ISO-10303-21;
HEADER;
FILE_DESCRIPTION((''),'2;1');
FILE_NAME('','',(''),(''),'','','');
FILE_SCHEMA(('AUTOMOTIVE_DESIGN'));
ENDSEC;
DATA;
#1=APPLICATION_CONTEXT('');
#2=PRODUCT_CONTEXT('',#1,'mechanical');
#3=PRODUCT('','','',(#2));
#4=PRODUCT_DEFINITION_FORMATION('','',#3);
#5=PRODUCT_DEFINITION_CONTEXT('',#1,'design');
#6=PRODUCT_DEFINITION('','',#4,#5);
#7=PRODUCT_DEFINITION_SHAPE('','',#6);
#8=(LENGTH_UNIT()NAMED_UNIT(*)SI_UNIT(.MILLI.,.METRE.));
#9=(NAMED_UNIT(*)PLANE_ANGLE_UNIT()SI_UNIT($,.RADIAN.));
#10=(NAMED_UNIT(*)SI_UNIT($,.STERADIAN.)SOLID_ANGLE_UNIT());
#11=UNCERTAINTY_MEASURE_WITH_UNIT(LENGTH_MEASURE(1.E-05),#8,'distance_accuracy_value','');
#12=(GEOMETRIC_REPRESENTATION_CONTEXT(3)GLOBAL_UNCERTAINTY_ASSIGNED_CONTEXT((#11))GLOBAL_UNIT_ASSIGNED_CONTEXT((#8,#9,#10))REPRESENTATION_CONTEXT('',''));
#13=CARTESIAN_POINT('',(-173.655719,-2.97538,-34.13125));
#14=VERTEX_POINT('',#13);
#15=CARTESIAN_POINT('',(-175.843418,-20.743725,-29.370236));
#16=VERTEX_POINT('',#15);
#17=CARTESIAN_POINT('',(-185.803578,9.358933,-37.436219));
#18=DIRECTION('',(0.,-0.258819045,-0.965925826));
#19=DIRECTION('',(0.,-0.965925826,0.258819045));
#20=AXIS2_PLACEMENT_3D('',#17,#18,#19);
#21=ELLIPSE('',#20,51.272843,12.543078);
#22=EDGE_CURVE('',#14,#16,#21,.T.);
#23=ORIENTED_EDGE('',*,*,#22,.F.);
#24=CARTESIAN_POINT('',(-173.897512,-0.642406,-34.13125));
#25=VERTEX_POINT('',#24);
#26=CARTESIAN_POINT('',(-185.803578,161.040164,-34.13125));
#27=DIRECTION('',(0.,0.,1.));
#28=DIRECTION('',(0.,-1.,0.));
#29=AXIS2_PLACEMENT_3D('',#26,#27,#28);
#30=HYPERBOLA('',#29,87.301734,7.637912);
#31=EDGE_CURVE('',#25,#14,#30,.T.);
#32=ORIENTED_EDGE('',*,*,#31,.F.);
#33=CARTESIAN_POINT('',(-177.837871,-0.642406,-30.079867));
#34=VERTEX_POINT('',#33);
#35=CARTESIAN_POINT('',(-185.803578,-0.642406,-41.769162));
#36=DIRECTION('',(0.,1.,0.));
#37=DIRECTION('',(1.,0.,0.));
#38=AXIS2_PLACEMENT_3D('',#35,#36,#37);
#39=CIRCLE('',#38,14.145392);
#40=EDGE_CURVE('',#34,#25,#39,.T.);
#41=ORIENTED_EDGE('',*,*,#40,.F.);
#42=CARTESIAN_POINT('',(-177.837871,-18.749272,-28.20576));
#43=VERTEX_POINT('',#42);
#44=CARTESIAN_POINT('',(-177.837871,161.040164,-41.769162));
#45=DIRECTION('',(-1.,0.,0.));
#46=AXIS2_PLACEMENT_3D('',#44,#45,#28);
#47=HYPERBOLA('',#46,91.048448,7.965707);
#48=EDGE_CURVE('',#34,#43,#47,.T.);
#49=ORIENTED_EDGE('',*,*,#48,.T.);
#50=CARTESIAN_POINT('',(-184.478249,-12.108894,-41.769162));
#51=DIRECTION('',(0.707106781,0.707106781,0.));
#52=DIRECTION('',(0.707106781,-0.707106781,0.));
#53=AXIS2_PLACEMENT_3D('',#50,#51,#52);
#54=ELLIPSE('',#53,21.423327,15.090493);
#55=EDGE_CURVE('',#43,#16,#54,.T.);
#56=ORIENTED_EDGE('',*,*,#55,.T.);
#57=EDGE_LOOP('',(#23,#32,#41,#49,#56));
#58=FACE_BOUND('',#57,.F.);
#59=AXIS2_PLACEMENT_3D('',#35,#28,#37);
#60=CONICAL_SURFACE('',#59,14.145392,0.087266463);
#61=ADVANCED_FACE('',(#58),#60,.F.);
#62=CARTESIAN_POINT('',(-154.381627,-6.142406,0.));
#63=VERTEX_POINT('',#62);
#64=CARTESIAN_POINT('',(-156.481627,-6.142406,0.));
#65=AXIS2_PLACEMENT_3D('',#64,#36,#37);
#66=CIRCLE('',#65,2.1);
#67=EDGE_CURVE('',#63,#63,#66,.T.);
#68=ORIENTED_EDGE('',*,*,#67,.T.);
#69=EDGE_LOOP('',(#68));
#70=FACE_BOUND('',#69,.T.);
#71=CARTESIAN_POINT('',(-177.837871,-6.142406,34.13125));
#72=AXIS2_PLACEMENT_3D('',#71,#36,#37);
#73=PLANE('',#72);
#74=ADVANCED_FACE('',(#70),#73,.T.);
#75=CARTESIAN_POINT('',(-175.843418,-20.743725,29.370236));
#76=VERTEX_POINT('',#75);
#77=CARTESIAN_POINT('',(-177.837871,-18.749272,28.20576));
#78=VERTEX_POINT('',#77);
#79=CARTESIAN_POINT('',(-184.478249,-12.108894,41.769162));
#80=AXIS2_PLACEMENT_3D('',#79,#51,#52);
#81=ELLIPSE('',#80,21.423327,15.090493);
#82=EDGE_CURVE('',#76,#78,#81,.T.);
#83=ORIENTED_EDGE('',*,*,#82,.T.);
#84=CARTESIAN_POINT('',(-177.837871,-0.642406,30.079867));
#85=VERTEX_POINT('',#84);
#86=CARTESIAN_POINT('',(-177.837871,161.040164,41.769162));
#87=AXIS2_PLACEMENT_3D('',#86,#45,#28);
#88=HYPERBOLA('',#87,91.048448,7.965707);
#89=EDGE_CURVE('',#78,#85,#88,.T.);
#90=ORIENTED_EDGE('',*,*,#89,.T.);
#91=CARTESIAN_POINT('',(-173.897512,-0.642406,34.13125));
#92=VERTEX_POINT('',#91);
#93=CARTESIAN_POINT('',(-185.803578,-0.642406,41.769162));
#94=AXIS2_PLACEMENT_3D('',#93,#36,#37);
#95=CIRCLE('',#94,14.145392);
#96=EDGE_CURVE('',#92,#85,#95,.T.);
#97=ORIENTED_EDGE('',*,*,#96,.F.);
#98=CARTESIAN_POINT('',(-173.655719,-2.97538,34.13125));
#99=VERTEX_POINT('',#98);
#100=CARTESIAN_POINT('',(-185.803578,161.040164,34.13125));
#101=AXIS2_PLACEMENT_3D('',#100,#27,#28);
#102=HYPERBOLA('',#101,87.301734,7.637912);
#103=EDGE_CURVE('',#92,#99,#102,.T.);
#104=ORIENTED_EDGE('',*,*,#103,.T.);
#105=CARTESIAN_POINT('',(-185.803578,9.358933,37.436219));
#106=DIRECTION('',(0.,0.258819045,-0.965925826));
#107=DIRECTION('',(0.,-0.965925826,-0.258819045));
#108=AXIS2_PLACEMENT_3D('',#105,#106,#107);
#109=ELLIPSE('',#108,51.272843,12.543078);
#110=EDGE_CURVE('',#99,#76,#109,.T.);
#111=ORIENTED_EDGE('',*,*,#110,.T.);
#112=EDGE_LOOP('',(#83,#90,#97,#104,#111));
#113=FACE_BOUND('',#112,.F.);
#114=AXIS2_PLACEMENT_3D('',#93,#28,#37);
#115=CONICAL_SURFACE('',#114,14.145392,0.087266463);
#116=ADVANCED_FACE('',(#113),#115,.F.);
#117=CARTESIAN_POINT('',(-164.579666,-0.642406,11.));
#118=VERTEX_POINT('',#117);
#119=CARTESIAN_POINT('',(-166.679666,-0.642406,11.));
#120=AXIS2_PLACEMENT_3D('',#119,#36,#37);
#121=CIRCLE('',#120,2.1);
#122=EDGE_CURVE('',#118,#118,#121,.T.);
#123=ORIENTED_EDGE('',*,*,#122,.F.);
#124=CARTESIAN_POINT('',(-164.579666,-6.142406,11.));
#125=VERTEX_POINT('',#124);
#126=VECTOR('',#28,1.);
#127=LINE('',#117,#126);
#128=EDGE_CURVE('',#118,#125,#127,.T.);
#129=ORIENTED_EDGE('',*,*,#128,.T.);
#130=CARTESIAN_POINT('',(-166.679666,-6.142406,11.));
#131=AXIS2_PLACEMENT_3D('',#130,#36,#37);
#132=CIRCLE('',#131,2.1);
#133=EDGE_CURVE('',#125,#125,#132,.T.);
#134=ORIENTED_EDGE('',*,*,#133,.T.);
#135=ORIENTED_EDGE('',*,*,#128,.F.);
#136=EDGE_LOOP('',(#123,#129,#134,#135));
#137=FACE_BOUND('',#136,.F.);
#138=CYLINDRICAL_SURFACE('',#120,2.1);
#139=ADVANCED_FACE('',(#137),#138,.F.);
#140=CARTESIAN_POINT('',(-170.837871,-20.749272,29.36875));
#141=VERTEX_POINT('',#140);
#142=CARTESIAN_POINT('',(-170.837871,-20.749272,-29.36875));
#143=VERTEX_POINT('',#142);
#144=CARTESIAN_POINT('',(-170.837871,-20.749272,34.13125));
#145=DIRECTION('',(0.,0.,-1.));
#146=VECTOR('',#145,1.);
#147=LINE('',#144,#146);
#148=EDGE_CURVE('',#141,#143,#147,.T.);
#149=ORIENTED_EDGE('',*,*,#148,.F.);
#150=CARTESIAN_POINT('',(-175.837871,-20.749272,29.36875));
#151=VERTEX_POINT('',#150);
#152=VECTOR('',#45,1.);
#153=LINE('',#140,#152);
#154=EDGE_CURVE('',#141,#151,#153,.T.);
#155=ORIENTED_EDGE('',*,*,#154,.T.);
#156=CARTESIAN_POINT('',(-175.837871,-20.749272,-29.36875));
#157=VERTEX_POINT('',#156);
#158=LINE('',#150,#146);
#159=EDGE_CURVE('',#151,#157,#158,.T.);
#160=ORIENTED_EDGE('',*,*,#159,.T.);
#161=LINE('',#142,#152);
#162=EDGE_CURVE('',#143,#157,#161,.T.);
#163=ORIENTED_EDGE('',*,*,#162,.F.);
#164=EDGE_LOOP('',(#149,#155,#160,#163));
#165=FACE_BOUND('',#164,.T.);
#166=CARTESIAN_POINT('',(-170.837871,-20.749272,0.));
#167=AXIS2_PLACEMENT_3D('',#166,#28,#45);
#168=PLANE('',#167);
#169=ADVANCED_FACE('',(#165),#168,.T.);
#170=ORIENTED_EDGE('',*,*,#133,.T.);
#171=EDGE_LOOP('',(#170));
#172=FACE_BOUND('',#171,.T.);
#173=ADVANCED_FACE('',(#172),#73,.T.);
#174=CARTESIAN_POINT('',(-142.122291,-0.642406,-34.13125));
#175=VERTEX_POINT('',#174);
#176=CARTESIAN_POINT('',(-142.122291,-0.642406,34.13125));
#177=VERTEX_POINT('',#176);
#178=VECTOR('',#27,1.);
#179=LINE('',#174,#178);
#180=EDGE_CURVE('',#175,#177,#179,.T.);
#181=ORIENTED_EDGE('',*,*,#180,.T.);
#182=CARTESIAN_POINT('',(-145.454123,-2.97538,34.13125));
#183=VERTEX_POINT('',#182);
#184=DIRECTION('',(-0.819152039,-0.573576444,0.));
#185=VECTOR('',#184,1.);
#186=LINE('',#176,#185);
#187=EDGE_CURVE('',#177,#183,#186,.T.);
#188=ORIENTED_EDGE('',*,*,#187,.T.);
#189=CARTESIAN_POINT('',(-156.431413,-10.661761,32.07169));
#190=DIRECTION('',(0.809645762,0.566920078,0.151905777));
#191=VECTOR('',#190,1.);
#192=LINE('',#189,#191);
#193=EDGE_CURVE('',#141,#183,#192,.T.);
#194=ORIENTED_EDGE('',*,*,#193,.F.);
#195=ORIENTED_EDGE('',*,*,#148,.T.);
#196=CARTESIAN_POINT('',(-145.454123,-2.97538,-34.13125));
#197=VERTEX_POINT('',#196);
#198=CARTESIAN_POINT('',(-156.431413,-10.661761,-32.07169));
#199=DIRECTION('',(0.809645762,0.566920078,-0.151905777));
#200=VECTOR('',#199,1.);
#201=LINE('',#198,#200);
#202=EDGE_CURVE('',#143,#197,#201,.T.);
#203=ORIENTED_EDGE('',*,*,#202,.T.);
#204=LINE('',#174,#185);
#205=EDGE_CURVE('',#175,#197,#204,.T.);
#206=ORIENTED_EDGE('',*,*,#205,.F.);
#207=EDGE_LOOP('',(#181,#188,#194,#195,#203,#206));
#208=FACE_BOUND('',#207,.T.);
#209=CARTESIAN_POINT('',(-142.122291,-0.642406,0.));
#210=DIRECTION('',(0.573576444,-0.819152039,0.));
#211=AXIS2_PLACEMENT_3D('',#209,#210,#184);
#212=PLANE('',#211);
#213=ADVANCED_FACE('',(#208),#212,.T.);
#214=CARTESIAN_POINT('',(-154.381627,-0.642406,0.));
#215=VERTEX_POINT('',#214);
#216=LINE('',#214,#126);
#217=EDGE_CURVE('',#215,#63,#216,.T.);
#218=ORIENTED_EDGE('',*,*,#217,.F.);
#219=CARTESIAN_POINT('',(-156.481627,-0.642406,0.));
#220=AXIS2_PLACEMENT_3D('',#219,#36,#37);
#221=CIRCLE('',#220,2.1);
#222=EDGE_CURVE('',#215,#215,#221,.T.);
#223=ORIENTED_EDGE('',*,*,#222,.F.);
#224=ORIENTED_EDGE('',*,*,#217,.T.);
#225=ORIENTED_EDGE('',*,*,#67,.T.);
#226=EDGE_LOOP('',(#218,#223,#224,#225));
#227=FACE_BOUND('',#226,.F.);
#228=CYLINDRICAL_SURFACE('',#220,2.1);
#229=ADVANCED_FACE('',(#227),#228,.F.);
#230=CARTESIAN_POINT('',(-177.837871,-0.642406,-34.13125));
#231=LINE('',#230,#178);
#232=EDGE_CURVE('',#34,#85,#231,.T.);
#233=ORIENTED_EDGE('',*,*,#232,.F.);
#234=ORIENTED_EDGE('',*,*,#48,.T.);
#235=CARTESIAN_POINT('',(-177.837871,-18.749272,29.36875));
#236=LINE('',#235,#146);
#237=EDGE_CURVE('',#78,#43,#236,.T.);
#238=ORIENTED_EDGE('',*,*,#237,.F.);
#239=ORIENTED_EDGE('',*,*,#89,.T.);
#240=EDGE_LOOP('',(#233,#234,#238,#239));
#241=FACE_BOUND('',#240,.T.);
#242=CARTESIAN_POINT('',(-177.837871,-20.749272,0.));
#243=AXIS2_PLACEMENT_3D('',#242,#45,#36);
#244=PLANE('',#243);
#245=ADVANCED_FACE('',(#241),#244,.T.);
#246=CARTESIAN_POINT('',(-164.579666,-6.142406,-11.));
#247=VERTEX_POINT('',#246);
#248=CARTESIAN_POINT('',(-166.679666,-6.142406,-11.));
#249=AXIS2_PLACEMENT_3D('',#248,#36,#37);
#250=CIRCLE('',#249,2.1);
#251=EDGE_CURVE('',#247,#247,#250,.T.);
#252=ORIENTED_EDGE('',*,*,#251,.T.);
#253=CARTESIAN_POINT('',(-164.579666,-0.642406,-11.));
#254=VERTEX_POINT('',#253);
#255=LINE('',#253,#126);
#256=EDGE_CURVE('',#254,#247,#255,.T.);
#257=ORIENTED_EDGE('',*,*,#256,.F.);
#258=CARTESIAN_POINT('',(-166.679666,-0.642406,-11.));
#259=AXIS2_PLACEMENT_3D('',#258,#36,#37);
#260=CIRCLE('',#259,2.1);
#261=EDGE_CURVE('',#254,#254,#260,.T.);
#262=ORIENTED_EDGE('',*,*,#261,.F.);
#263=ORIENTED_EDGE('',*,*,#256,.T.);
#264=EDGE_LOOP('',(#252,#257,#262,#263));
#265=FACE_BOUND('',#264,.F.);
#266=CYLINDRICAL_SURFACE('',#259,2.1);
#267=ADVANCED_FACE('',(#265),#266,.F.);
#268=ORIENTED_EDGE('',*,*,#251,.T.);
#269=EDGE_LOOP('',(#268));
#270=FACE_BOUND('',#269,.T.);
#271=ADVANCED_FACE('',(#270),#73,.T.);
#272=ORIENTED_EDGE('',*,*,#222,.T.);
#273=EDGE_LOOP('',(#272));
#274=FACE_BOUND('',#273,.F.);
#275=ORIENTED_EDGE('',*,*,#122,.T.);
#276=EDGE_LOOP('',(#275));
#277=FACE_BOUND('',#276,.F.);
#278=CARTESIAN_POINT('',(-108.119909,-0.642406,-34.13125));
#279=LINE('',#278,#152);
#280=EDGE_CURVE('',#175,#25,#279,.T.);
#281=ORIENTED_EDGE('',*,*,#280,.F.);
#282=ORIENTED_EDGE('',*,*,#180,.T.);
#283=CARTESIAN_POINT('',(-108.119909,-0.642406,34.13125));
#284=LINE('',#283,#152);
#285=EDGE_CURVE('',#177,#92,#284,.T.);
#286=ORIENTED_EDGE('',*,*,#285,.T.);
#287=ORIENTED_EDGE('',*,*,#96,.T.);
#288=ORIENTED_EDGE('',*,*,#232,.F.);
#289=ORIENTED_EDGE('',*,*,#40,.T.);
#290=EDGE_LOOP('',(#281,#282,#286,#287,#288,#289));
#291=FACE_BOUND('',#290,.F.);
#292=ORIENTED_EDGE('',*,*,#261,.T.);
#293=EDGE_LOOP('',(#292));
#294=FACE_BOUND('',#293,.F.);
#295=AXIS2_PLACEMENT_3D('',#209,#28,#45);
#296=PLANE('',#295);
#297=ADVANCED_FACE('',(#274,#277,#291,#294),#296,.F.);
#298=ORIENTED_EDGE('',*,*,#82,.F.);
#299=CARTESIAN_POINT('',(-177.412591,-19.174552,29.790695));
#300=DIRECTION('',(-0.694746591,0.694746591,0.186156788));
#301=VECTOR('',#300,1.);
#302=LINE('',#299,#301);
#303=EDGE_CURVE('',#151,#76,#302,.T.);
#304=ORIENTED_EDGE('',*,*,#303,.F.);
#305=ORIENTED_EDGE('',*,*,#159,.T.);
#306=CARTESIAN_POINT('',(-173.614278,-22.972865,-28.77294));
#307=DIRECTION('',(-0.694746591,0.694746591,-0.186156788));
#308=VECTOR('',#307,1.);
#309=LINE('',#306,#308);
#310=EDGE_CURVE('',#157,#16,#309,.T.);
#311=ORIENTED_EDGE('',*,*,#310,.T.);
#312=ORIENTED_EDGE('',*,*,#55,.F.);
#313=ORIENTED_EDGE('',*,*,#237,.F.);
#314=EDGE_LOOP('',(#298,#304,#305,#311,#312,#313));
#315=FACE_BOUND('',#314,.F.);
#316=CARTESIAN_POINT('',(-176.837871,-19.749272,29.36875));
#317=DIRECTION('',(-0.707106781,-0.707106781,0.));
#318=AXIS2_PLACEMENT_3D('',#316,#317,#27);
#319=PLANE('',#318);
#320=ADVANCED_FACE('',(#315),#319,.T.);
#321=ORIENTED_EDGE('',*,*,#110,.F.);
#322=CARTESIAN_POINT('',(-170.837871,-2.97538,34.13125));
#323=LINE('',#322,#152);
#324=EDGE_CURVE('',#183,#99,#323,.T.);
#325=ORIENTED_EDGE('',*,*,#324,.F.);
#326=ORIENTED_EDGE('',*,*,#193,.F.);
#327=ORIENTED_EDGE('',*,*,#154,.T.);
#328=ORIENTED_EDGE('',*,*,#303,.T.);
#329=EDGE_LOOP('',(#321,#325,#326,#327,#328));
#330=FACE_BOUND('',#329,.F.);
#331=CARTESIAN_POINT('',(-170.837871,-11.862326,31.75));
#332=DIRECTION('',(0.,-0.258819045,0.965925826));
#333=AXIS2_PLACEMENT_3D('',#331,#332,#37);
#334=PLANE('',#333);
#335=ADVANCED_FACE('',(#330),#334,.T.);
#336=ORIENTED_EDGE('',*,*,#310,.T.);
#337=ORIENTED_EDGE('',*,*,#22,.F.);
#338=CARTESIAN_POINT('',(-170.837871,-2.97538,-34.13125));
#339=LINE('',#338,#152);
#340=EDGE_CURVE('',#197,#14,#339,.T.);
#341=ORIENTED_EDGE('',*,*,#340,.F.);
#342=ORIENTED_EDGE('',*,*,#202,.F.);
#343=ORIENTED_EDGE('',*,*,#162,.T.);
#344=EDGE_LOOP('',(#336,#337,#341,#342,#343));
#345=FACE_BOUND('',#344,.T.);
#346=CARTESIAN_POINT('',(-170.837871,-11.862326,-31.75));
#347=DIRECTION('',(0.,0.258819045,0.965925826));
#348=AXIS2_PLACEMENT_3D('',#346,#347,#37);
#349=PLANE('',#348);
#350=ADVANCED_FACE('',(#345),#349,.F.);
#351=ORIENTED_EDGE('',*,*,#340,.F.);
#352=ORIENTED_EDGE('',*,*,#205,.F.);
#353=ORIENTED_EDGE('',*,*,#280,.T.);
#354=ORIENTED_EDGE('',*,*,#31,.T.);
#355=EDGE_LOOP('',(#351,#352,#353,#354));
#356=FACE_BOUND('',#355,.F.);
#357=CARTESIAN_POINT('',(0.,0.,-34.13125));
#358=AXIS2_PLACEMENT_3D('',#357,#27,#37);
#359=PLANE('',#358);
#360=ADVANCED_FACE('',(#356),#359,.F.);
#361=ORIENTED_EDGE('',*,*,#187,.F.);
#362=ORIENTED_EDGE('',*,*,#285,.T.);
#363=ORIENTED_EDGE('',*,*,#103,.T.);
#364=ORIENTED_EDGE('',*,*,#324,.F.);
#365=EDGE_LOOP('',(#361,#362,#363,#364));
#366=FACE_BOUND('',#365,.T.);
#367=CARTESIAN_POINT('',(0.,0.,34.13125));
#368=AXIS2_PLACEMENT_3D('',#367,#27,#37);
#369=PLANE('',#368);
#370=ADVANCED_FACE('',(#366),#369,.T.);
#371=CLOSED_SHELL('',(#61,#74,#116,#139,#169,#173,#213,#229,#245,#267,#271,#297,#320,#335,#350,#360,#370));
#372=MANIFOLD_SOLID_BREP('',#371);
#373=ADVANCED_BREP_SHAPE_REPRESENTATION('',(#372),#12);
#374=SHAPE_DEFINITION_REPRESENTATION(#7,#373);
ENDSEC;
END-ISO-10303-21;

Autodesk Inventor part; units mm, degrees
ref_plane "YZ Plane" through (0, 0, 0) normal (1, 0, 0) x (0, 1, 0)
ref_plane "XZ Plane" through (0, 0, 0) normal (0, 1, 0) x (-1, 0, 0)
ref_plane "XY Plane" through (0, 0, 0) normal (0, 0, 1) x (1, 0, 0)
sketch "Sketch1" plane through (0, 0, 0) normal (0, 0, 1) x (1, 0, 0)
  line L0 (-108.119909, -0.642406) -> (-283.474909, -0.642406)
  line L1 (-142.122291, -0.642406) -> (-170.837871, -20.749272)
  line L2 (-142.122291, -0.642406) -> (-107.067041, -0.642406) construction
  line L3 (-170.837871, -20.749272) -> (-177.837871, -20.749272)
  line L4 (-177.837871, -20.749272) -> (-184.577322, -0.642406)
  line L5 (-177.837871, -20.749272) -> (-177.837871, -0.642406)
  point P0 (0, 0)
  dimension "d0" = 145
  dimension "d1" = 7
extrude "Extrusion1" add sketch "Sketch1" along normal mid plane 68.2625 contours L1 L3 L5 L0
chamfer "Chamfer1" distance 4.7625 angle 75 2 edges at (-174.3379, -20.7493, -34.1313) (-174.3379, -20.7493, 34.1313) measured on face at (-175.5045, -20.7493, -11.3771)
chamfer "Chamfer2" distance 2 angle 45 1 edges at (-177.8379, -20.7493, 0)
sketch "Sketch2" plane through (-177.837871, -0.642406, 34.13125) normal (0, 1, 0) x (1, 0, 0)
  circle A0 centre (11.158205, 23.13125) radius 2.1
  circle A1 centre (21.356244, 34.13125) radius 2.1
  circle A2 centre (11.158205, 45.13125) radius 2.1
  point P0 (177.837871, 34.13125)
extrude "Extrusion2" cut sketch "Sketch2" against normal blind 5.5
sketch "Sketch3" plane through (-177.837871, -0.642406, 34.13125) normal (0, 1, 0) x (1, 0, 0)
  ellipse E0 centre (-9.038126, 75.297581) end of major axis (-3.616987, 62.831943) minor radius 11.723829
  ellipse E1 centre (-5.030683, 77.040364) end of major axis (-0.216713, 65.970883) minor radius 10.410756
  ellipse E2 centre (-9.038126, 75.297581) end of major axis (-3.616987, 62.831943) minor radius 11.723829
  ellipse E3 centre (-5.030683, 77.040364) end of major axis (-0.216713, 65.970883) minor radius 10.410756
  circle A0 centre (-7.965707, 75.900412) radius 14.145392
  line L0 (35.71558, 68.2625) -> (35.71558, 0)
  line L1 (35.71558, 34.13125) -> (24.180949, 34.13125) construction
  circle A1 centre (-7.965707, -7.637912) radius 14.145392
  point P0 (177.837871, 34.13125)
sketch "Sketch3 outline for Extrusion3" plane through (-177.837871, -0.642406, 34.13125) normal (0, 1, 0) x (1, 0, 0)
  circle A0 centre (-7.965707, -7.637912) radius 14.145392
  circle A1 centre (-7.965707, 75.900412) radius 14.145392
extrude "Extrusion3" cut sketch "Sketch3 outline for Extrusion3" against normal blind 25.4 draft 5
properties part number "Head_Fin_Bottom"
